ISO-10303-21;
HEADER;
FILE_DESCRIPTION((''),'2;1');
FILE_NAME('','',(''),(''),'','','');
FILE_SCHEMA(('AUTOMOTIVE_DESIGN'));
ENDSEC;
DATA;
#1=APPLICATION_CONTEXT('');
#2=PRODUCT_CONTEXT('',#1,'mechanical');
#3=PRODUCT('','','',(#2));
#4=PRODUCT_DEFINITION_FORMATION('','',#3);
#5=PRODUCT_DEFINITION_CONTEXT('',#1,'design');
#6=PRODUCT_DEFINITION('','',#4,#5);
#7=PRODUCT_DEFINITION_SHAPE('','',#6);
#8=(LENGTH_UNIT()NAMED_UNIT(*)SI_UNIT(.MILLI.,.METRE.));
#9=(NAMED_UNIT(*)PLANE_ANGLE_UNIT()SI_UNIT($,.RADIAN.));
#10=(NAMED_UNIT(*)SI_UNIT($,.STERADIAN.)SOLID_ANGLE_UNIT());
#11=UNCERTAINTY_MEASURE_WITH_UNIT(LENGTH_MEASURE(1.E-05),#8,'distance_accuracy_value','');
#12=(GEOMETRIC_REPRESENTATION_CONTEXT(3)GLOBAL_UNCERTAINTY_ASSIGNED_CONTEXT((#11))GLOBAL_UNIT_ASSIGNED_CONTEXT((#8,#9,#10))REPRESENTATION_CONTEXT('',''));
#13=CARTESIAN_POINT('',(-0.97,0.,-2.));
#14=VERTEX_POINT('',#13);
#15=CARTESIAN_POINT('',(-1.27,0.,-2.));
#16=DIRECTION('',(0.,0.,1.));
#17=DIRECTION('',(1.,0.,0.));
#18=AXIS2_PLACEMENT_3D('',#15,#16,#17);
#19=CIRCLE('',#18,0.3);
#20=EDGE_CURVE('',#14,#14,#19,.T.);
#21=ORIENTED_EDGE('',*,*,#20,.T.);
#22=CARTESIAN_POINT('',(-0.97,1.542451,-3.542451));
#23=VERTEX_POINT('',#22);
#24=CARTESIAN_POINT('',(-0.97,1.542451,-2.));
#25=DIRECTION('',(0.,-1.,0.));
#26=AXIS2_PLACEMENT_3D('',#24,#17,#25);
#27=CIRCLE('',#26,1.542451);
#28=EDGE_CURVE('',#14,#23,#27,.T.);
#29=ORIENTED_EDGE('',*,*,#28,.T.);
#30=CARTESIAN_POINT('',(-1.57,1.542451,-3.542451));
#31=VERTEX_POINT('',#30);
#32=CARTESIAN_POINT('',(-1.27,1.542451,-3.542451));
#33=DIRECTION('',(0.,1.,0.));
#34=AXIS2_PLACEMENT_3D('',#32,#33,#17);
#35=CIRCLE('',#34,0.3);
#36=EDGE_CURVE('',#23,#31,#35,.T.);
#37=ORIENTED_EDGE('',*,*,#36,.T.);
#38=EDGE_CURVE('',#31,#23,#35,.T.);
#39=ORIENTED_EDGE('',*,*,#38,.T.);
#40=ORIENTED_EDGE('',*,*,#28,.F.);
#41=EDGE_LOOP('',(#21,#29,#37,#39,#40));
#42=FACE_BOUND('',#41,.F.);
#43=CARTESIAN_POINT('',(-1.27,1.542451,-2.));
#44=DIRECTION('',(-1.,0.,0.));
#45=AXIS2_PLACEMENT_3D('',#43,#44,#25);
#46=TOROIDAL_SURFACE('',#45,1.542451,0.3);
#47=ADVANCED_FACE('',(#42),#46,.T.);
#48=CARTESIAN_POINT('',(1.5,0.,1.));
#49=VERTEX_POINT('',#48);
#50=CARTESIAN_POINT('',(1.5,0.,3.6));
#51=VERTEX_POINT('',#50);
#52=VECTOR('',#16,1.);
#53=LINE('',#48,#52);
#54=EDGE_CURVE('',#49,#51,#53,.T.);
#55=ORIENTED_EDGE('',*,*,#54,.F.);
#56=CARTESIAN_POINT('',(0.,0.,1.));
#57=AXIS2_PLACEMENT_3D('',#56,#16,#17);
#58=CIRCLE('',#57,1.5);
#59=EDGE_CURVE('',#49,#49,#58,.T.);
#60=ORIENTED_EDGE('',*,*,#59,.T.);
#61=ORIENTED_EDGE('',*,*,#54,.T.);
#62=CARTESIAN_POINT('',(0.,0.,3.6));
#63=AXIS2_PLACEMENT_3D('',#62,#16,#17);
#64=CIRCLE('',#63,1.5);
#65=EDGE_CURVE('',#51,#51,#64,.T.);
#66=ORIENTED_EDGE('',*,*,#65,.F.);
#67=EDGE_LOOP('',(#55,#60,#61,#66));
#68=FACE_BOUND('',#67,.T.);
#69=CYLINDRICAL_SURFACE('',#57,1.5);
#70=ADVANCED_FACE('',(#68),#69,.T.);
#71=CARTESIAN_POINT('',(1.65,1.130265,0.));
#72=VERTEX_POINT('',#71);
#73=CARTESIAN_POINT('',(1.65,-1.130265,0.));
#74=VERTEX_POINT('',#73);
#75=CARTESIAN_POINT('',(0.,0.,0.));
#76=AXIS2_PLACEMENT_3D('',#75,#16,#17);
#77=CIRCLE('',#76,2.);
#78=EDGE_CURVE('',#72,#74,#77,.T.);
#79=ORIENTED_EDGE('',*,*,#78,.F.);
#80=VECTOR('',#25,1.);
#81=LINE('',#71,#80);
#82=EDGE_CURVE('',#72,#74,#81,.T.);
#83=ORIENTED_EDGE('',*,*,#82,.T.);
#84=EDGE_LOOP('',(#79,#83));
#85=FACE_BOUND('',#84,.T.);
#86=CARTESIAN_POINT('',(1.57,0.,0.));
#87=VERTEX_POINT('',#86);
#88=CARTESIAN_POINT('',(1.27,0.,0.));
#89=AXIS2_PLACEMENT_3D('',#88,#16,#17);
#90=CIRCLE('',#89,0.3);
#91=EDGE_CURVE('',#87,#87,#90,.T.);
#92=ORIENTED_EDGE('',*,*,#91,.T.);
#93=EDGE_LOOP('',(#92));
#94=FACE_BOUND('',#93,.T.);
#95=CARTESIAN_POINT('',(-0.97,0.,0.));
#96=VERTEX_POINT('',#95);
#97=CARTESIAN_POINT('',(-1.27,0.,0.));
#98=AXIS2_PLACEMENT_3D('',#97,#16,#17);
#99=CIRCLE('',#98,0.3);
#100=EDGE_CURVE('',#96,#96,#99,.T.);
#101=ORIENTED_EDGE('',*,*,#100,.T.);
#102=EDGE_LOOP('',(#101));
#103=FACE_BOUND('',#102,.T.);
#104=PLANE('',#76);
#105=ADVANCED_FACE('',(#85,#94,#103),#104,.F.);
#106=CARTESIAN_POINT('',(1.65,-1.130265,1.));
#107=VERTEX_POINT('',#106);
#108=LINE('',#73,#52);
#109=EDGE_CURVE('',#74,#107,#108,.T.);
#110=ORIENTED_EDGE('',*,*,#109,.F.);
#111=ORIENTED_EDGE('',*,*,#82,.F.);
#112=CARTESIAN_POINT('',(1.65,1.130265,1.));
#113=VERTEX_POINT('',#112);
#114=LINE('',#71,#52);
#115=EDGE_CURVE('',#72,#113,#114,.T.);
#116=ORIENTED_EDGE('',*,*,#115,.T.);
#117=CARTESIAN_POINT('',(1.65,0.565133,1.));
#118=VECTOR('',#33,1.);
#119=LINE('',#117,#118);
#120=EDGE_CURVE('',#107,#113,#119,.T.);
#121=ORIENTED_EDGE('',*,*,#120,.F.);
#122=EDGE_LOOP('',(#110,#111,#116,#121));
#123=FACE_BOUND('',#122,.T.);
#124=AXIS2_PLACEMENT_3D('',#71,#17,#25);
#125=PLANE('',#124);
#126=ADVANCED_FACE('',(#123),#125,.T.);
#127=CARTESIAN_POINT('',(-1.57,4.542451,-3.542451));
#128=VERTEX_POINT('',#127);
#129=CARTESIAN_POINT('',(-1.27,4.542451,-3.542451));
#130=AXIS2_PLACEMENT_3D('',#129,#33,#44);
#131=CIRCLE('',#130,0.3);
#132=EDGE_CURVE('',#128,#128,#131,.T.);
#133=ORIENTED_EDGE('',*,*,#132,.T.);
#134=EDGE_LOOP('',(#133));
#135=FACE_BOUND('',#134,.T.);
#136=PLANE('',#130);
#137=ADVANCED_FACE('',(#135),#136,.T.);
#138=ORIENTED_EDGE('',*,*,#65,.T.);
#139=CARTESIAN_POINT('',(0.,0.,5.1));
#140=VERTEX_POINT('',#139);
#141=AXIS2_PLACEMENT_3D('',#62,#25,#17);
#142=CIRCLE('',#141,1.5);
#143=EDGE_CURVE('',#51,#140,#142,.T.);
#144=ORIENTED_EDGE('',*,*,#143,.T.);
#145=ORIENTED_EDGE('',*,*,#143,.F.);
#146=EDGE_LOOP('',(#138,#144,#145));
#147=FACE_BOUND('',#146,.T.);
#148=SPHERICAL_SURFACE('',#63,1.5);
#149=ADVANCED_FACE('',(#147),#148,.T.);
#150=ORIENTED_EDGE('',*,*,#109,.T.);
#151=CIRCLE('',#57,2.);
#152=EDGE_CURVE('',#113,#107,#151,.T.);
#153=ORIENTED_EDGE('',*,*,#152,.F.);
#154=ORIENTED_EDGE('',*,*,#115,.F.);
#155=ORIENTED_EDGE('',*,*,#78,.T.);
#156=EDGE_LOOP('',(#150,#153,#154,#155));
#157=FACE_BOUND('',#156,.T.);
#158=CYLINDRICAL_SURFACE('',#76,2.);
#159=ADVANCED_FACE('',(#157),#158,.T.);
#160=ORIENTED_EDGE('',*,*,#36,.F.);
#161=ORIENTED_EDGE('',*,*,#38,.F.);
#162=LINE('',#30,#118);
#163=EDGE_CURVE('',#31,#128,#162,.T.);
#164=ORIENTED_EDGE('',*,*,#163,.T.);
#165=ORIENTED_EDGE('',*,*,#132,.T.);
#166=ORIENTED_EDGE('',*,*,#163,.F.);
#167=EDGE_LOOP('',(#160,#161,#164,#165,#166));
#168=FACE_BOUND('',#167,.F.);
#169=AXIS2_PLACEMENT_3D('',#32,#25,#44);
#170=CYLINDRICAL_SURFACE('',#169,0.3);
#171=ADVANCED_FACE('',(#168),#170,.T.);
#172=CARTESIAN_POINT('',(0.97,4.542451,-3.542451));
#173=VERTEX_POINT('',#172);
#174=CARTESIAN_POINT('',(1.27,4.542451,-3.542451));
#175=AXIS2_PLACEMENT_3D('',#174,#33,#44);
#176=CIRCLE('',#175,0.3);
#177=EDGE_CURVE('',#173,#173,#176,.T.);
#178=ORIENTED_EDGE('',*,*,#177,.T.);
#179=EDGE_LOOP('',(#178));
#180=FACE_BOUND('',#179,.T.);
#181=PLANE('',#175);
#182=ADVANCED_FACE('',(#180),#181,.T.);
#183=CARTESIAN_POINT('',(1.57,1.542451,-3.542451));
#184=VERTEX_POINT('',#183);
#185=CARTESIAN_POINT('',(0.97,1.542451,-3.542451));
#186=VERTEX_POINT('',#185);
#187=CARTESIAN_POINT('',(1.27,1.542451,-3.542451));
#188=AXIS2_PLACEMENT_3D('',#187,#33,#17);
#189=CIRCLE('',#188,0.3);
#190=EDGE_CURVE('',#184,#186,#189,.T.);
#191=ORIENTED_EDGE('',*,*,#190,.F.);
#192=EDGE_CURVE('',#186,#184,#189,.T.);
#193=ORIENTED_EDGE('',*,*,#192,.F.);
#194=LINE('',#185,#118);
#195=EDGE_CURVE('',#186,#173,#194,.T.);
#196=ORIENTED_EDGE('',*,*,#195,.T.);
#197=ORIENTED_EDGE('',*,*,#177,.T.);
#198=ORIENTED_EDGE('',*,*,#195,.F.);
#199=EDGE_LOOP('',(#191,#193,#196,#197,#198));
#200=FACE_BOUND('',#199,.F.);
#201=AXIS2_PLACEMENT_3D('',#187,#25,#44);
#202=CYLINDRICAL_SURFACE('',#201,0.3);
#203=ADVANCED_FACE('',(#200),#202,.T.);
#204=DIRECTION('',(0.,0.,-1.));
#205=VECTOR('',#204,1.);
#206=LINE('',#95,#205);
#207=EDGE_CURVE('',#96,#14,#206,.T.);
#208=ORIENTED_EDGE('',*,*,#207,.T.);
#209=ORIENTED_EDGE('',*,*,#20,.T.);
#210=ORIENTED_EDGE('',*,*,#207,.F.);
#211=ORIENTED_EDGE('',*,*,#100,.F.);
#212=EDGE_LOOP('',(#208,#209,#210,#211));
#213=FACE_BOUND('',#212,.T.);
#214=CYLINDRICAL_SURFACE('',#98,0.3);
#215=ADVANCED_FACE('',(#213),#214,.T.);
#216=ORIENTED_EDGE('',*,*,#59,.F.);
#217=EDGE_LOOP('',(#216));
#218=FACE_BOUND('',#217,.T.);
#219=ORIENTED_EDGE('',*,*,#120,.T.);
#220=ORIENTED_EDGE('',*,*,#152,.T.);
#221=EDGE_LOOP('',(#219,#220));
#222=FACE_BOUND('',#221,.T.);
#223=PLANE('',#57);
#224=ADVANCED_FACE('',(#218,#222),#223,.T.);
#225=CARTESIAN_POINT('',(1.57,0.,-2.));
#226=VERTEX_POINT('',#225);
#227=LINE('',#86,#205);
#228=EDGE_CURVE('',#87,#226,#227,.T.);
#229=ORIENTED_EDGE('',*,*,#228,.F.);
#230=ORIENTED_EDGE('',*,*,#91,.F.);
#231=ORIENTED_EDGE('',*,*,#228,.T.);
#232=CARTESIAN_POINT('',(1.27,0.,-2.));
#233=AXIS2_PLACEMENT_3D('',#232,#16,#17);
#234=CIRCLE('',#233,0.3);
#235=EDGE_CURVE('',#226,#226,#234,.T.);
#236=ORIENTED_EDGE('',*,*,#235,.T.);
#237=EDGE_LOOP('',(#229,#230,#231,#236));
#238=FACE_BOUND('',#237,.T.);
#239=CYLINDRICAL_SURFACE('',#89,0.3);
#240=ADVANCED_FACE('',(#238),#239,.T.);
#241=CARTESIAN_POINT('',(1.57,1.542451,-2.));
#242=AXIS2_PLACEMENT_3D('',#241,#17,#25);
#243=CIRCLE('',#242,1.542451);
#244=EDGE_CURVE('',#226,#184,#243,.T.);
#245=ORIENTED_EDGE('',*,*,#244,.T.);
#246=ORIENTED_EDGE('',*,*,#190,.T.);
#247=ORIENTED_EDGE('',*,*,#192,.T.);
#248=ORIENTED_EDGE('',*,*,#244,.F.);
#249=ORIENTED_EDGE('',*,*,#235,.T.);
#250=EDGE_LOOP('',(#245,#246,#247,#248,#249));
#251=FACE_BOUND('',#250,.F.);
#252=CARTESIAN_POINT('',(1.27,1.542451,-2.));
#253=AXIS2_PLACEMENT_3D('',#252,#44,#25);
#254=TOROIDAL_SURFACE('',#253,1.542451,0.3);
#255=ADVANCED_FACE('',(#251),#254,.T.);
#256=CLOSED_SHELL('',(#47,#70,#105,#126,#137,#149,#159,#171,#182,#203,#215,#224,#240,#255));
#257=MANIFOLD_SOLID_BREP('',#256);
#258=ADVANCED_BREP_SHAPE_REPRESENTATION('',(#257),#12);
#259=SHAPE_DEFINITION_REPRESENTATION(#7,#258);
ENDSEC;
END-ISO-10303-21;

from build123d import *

# Parameters (mm, degrees)
F2_R      = 0.3
F3_DEPTH  = 2
F4_DEPTH  = 25
F5_R      = 0.3
F6_ANGLE  = 90
F6_FACE_R = 0.3
F7_R      = 0.3
F8_DEPTH  = 3


# Not quite as in the source:
# - a feature names something its author has since deleted; it is built from what else it names


with BuildPart() as f1:
    # F0 (on Front) → F1 (revolve)
    with BuildSketch(Plane.XZ):
        with BuildLine():
            Line((0, 3.6), (0, 0))
            Line((0, 0), (1.5, 0))
            Line((1.5, 0), (2, 0))
            Line((2, 0), (2, 1))
            Line((2, 1), (1.5, 1))
            Line((1.5, 1), (1.5, 3.6))
            ThreePointArc((1.5, 3.6), (1.0606601718, 4.6606601718), (0, 5.1))
            Line((0, 5.1), (0, 3.6))
        make_face()
    revolve(axis=Axis((0, 0, 1.8), (0, 0, 1)))

    # F2 (on Top) → F3 (join)
    with BuildSketch(Plane.XY):
        with Locations((-1.27, 0)):
            Circle(F2_R)
        with Locations((1.27, 0)):
            Circle(F2_R)
    extrude(amount=-F3_DEPTH)

    # F2 (on Top) → F4 (cut)
    with BuildSketch(Plane.XY):
        with BuildLine():
            Line((1.65, 1.1302654555), (1.65, 0))
            Line((1.65, 0), (1.65, -1.1302654555))
            ThreePointArc((1.65, -1.1302654555), (1.9104973175, -0.5916079783), (2, 0))
            ThreePointArc((2, 0), (1.9104973175, 0.5916079783), (1.65, 1.1302654555))
        make_face()
    extrude(amount=F4_DEPTH, mode=Mode.SUBTRACT)

    # F5 (on face) → F6 (revolve)
    with BuildSketch(Plane(origin=(0, 0, -2), x_dir=(1, 0, 0), z_dir=(0, 0, -1))):
        with Locations((-1.27, 0)):
            Circle(F5_R)
        with Locations((1.27, 0)):
            Circle(F5_R)
    revolve(axis=Axis((0.0564431539, 1.5424509184, -2), (1, 0, 0)), revolution_arc=F6_ANGLE)

    # F6_face (on face) + F7 (on face) → F8 (join)
    with BuildSketch(Plane(origin=(1.27, 1.5424509184, -3.5424509184), x_dir=(-1, 0, 0), z_dir=(0, 1, 0))):
        with Locations((2.54, 0)):
            Circle(F6_FACE_R)
    with BuildSketch(Plane(origin=(0, 1.5424509184, 0), x_dir=(-1, 0, 0), z_dir=(0, 1, 0))):
        with Locations((-1.27, -3.5424509184)):
            Circle(F7_R)
    extrude(amount=F8_DEPTH)


solid = f1.part
